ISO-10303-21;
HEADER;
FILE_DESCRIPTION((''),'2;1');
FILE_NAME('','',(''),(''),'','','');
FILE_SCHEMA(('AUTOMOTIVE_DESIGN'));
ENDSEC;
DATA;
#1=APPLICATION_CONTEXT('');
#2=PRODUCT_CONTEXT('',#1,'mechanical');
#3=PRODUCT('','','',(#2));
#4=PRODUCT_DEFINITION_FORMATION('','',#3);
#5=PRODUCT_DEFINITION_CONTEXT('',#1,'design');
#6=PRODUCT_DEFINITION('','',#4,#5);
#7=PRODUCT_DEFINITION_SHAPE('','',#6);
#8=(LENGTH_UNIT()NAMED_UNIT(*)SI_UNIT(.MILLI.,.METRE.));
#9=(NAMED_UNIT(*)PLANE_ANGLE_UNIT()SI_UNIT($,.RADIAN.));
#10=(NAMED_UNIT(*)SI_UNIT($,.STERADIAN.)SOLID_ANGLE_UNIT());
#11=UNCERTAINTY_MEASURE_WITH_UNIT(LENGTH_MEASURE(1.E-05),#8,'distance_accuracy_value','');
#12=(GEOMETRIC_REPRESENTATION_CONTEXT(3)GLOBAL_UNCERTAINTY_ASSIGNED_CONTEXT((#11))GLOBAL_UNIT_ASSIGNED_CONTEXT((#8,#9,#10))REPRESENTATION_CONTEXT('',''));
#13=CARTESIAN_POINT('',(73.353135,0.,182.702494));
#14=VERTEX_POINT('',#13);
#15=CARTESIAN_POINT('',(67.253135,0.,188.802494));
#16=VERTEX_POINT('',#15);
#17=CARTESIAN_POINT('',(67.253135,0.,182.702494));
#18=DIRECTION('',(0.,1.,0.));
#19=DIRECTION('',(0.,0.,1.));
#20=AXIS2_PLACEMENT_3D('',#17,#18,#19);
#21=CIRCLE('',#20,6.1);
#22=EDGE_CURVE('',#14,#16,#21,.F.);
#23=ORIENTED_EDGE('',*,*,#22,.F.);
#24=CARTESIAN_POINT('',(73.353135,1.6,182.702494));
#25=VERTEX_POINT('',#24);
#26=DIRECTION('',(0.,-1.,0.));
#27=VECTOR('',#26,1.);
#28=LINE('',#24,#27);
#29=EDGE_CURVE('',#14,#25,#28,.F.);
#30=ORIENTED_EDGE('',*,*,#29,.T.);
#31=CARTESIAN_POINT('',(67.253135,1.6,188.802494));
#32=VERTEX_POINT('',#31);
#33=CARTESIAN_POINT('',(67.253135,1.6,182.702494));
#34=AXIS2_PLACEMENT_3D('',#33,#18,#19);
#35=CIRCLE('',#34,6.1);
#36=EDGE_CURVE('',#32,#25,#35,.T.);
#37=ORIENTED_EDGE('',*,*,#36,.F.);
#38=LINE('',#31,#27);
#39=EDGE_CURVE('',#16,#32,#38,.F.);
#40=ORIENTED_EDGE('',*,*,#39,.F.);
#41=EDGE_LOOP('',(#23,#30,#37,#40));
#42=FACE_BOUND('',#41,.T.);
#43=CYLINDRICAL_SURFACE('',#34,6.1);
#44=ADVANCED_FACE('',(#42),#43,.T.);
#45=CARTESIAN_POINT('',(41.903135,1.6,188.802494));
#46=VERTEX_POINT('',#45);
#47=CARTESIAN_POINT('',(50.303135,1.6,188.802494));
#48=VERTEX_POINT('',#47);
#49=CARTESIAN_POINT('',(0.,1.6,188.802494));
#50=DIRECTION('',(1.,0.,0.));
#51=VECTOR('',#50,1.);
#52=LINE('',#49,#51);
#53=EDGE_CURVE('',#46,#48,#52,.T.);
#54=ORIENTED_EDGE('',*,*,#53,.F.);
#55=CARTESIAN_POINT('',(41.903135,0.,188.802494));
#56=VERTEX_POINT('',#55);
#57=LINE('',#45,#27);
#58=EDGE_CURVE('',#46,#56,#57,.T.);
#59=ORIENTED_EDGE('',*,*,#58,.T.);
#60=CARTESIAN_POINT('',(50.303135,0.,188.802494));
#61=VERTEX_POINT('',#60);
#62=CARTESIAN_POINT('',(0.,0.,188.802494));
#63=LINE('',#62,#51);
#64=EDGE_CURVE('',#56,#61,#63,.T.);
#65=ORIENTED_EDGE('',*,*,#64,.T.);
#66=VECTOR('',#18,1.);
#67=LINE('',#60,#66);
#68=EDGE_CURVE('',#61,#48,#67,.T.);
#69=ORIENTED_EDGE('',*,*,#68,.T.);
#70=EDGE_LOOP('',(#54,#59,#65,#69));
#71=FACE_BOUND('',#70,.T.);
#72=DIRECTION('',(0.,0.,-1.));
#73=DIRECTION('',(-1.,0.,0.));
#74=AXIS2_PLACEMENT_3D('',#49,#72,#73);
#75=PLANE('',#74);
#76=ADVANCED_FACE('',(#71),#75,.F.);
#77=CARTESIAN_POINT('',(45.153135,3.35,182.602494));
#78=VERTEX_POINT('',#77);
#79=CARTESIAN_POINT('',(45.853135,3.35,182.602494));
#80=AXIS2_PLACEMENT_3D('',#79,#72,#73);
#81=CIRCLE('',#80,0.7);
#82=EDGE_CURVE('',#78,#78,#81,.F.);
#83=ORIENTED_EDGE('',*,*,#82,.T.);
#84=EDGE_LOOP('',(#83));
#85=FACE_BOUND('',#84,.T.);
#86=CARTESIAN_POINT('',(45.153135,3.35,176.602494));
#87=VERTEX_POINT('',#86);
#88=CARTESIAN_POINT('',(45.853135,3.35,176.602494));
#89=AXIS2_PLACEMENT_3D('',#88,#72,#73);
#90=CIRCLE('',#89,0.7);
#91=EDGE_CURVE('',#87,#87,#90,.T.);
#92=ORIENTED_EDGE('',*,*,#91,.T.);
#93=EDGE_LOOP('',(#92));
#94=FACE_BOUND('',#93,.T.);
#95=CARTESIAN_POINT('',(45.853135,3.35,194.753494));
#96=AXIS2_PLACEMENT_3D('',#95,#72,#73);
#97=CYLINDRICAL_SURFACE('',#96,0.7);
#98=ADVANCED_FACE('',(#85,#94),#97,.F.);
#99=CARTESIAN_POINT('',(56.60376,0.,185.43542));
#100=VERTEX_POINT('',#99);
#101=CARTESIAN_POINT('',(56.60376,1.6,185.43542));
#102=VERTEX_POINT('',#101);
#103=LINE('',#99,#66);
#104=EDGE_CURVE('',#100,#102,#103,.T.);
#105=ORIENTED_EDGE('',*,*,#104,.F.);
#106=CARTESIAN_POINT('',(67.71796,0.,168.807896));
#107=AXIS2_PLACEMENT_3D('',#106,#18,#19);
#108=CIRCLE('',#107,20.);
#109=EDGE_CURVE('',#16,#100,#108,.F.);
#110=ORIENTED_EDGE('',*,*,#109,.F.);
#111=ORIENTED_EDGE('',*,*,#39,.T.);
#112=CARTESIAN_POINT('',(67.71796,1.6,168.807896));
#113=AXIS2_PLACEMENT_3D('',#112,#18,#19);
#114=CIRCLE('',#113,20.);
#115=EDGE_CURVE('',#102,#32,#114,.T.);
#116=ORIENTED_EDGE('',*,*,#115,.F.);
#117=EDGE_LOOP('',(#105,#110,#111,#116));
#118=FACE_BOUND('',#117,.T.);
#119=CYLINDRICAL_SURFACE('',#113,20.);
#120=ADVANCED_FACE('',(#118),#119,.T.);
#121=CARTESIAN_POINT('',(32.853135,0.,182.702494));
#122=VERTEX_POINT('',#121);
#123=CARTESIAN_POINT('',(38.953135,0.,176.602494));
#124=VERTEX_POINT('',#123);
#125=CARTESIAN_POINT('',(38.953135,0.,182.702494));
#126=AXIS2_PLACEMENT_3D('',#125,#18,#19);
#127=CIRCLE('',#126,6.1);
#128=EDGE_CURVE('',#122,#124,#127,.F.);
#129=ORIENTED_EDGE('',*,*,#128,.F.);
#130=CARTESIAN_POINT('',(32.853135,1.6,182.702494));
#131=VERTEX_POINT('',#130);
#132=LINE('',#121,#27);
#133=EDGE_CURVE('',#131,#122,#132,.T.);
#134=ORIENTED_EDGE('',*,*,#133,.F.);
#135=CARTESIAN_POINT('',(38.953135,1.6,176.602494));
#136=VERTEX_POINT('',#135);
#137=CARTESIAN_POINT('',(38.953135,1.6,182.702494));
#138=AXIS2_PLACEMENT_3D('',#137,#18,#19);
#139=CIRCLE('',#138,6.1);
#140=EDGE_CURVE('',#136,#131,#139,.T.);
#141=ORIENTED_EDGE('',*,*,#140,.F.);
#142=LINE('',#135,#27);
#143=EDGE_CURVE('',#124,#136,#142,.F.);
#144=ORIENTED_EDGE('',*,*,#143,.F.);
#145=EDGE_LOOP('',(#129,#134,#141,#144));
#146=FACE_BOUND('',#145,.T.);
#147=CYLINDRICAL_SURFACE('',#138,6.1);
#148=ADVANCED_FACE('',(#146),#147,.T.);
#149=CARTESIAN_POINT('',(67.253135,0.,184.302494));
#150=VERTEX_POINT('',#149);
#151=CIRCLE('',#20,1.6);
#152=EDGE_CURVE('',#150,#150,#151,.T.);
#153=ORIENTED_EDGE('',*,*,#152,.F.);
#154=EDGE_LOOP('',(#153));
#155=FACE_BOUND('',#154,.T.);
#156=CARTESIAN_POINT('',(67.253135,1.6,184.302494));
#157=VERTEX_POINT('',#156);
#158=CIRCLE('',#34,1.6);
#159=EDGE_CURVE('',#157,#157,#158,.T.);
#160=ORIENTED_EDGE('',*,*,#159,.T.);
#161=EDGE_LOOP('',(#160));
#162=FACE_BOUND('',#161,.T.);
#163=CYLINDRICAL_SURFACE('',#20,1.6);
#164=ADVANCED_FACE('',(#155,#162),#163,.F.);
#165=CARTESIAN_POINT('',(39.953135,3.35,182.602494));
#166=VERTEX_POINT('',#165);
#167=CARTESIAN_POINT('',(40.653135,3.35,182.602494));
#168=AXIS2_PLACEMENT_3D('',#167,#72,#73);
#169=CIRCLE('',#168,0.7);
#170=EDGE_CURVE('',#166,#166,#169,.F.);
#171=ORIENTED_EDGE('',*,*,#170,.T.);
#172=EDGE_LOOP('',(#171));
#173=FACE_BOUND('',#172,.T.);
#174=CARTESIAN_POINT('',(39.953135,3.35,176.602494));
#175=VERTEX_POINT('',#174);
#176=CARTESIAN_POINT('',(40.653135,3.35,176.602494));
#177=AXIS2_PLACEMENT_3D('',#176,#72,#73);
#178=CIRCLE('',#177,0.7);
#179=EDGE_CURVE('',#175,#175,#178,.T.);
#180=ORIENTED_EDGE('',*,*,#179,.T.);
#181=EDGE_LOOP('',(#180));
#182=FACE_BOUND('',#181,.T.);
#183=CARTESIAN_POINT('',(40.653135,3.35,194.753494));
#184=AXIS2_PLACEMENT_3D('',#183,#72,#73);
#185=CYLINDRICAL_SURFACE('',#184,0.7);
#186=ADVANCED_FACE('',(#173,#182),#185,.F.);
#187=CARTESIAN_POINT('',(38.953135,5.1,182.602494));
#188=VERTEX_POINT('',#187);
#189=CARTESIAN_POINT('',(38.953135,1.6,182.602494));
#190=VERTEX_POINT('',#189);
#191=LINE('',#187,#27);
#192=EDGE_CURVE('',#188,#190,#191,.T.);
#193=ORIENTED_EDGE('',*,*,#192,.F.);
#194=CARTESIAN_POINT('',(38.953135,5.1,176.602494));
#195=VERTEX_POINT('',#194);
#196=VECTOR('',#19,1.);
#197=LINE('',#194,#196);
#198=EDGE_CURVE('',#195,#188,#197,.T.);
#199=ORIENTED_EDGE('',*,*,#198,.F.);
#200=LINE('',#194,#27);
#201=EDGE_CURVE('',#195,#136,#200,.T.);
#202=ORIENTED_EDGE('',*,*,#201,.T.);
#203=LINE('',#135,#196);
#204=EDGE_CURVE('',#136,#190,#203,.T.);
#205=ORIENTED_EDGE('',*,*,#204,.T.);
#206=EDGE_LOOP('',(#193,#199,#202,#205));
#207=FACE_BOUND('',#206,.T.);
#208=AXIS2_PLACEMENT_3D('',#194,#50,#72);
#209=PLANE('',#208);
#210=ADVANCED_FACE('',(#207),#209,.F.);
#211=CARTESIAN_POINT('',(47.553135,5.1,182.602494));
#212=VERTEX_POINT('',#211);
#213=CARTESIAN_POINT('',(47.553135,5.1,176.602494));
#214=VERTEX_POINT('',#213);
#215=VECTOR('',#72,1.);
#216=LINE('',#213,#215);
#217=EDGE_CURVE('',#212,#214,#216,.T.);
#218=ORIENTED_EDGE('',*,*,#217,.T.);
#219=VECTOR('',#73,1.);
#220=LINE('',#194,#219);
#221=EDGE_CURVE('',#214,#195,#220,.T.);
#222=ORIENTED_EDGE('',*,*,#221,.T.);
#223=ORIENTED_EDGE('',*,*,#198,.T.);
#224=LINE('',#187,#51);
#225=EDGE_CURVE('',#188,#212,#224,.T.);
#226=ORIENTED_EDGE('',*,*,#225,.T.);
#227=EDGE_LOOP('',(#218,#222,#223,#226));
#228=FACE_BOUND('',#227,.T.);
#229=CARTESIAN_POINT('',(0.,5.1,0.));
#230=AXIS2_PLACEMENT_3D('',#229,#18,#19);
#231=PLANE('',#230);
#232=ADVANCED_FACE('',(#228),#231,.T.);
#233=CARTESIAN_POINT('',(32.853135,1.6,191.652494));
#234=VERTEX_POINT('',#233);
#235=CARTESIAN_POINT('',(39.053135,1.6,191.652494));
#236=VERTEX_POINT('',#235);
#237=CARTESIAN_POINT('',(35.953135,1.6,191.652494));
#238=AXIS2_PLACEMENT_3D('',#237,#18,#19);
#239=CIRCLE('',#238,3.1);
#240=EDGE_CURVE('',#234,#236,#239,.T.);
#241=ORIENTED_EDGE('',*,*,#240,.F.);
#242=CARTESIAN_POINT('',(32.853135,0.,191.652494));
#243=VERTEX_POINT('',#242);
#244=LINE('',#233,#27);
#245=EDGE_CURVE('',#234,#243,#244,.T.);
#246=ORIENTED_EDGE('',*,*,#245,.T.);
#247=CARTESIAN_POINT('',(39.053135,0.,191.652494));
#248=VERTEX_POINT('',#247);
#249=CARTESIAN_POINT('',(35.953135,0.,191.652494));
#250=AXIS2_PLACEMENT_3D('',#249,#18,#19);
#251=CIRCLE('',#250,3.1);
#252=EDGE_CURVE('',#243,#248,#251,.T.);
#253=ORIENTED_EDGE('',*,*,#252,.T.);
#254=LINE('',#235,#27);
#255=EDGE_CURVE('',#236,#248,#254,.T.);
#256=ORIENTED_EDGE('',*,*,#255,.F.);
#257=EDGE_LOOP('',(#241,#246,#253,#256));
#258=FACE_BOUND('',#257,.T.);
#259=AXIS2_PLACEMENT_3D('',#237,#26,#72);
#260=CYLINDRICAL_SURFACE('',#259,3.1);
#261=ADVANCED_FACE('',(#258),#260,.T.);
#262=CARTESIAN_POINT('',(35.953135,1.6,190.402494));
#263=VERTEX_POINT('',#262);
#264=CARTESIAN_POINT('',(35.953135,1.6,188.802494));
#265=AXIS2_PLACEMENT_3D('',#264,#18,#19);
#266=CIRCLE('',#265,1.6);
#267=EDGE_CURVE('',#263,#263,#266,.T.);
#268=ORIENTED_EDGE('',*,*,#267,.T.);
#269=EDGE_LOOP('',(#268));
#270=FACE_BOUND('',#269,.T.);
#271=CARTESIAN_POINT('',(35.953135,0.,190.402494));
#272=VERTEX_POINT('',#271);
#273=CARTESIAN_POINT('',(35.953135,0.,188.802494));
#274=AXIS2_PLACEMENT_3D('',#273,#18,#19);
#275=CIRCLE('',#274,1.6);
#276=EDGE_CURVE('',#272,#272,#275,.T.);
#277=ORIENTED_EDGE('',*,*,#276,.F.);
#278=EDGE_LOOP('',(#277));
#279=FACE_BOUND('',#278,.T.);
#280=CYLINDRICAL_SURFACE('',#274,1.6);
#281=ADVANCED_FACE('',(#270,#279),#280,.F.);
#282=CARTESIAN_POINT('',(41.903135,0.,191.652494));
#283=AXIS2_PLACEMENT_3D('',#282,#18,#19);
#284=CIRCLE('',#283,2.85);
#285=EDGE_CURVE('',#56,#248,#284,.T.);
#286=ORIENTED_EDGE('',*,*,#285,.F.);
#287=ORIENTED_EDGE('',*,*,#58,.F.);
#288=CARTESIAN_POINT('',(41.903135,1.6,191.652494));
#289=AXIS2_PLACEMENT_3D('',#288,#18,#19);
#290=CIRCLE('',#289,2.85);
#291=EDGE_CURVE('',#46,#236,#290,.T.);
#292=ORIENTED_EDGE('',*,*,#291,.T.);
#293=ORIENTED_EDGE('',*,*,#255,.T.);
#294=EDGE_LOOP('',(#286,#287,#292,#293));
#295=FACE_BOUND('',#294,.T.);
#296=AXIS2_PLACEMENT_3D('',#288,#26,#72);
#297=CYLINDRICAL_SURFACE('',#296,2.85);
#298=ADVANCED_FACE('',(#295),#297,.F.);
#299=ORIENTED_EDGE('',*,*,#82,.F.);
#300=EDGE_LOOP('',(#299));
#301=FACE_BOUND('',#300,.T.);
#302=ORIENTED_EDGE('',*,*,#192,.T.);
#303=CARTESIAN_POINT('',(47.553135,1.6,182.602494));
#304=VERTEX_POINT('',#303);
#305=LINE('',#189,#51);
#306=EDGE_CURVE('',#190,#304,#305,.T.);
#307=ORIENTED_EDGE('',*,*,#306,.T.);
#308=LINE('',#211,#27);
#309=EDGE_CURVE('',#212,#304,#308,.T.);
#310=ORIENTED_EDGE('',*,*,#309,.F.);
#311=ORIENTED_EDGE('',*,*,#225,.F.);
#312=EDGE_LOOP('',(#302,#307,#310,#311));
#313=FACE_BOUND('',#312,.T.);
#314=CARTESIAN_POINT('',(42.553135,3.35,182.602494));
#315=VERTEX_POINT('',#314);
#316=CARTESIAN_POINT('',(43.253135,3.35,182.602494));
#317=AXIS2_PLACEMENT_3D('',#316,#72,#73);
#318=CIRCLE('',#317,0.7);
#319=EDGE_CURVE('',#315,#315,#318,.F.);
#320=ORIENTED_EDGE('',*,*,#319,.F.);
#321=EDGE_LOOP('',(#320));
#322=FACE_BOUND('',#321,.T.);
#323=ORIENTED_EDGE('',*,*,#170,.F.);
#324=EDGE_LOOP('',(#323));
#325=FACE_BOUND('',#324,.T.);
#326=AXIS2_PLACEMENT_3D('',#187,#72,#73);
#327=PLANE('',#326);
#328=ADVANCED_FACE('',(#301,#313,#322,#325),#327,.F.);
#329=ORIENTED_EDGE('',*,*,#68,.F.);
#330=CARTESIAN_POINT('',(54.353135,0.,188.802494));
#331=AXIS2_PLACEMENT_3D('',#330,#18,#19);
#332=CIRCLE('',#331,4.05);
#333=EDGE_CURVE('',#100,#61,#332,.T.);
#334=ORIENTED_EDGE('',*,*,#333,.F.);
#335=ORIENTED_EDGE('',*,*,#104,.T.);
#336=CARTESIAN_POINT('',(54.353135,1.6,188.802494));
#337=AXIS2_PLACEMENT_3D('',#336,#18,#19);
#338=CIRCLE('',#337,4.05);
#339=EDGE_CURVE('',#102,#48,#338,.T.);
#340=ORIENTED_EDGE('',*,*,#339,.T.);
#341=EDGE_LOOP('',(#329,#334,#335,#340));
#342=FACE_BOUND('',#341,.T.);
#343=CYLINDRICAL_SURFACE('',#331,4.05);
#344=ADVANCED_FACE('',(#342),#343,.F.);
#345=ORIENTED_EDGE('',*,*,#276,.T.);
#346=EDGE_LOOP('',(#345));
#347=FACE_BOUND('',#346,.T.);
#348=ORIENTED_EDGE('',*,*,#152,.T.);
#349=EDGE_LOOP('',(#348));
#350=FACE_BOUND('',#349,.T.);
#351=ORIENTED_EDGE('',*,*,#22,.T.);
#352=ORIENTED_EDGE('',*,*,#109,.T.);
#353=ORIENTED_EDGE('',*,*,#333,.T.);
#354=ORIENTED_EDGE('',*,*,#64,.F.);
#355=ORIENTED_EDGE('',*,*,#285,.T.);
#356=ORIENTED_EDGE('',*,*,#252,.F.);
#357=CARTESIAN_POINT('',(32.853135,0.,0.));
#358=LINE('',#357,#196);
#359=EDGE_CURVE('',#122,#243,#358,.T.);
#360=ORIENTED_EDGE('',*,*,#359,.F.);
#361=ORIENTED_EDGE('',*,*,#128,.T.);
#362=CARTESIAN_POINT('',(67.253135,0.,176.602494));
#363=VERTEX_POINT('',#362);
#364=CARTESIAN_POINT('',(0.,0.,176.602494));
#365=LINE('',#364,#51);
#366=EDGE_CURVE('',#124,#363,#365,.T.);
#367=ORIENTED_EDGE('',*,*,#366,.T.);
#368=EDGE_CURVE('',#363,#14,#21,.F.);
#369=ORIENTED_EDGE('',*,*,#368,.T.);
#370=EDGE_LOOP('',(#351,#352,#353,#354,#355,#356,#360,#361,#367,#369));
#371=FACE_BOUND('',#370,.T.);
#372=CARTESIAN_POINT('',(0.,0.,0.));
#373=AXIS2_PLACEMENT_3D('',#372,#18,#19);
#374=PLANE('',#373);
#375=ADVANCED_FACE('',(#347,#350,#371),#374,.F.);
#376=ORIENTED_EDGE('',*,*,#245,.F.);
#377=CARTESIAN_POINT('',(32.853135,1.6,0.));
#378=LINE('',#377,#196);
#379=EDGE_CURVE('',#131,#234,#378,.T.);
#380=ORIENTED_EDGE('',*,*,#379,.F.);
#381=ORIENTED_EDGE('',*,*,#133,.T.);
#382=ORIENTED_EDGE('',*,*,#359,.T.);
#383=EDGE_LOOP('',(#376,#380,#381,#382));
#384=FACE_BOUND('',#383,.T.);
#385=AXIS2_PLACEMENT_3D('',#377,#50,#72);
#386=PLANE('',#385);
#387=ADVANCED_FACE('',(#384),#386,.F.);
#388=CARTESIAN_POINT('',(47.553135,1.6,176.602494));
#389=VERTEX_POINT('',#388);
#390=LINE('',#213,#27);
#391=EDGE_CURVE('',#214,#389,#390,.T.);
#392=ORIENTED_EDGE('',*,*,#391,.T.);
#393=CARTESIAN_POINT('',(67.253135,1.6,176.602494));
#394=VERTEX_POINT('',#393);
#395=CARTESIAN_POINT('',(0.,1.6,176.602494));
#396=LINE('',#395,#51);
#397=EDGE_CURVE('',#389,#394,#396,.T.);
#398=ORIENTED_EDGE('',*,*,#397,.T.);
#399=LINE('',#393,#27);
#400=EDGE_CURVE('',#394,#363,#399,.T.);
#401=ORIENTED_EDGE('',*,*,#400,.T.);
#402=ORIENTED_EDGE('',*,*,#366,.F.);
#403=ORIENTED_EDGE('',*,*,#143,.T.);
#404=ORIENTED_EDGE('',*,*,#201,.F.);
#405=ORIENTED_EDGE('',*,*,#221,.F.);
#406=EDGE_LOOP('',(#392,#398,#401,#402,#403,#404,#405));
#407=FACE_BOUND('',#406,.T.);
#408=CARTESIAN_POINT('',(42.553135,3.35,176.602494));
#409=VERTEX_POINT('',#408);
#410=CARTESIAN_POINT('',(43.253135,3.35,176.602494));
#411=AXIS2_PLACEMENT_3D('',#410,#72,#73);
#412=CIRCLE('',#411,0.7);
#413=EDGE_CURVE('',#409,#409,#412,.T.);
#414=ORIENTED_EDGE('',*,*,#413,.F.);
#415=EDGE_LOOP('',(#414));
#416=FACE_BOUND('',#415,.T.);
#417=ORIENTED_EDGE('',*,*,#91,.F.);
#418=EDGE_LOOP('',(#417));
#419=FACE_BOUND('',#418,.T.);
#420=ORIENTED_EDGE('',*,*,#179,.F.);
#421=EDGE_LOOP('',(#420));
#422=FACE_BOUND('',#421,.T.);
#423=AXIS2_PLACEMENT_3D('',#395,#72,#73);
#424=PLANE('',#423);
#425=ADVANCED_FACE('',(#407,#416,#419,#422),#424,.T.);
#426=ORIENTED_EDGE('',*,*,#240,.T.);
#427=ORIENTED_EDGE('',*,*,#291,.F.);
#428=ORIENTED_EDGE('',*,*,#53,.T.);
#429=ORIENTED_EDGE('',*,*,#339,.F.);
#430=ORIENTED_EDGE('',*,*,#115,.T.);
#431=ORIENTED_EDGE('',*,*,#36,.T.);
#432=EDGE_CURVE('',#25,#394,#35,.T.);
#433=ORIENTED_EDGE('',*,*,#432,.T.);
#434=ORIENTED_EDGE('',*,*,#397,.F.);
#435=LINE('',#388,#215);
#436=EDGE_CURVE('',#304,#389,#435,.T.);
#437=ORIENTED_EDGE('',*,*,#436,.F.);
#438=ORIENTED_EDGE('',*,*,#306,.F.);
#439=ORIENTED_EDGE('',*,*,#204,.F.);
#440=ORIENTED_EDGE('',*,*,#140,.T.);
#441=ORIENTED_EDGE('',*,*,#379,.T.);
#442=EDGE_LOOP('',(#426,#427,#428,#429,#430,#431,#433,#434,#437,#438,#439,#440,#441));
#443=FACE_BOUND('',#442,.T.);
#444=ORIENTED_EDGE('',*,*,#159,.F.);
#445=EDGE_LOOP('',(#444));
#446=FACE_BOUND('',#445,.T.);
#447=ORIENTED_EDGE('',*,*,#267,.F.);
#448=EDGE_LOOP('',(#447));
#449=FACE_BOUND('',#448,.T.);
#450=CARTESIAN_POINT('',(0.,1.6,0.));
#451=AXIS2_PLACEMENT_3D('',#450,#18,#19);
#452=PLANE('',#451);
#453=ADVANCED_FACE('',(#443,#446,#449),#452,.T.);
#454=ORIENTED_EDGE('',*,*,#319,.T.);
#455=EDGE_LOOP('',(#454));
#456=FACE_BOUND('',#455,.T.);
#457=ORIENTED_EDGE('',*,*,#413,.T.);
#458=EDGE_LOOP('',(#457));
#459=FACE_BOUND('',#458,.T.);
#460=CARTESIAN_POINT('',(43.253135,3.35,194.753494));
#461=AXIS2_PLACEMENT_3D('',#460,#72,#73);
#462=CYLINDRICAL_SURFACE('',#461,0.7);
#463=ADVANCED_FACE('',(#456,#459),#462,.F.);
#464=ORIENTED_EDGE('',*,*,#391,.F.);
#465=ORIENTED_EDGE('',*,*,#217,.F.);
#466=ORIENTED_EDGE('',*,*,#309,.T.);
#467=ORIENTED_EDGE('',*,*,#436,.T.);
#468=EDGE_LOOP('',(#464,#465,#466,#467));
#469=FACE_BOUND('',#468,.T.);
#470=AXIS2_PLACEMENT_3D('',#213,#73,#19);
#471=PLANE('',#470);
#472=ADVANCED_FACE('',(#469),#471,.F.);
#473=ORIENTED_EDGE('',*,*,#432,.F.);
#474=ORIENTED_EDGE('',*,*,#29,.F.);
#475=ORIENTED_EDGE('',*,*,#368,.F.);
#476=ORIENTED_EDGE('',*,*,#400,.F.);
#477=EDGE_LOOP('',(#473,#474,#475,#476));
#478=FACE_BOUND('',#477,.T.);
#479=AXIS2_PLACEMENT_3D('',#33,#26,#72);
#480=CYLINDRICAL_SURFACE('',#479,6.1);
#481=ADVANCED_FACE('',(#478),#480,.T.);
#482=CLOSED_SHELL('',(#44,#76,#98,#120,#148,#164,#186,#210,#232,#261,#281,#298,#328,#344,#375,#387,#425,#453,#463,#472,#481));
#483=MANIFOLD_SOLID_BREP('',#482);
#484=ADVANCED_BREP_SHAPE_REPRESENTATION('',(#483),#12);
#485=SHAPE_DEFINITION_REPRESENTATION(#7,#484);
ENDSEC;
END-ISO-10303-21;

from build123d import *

# Parameters (mm, degrees)
BOSS_EXTRUDE1_DEPTH = 1.6
SKETCH4_R           = 1.6
CUT_EXTRUDE2_DEPTH  = 209.114814948
FILLET2_R           = 6.1
SKETCH2_W           = 8.6
SKETCH2_H           = 6
BOSS_EXTRUDE2_DEPTH = 3.5
CUT_EXTRUDE1_REACH  = 77.737
SKETCH3_R           = 0.7
FILLET1_R           = 20


# Some blends are built 0.0001 mm under size
with BuildPart() as part:
    # Sketch1 → Boss-Extrude1 (new body)
    with BuildSketch(Plane(origin=(0, 0, 0), x_dir=(1, 0, 0), z_dir=(0, 1, 0))):
        with BuildLine():
            Line((32.853134702, -176.602493772), (73.353134702, -176.602493772))
            Line((73.353134702, -176.602493772), (73.353134702, -188.802493772))
            Line((73.353134702, -188.802493772), (41.903134702, -188.802493772))
            ThreePointArc((41.903134702, -188.802493772), (39.887880375, -189.637239445), (39.053134702, -191.652493772))
            ThreePointArc((39.053134702, -191.652493772), (35.953134702, -194.752493772), (32.853134702, -191.652493772))
            Line((32.853134702, -191.652493772), (32.853134702, -176.602493772))
        make_face()
    extrude(amount=BOSS_EXTRUDE1_DEPTH)

    # Sketch4 → Cut-Extrude2 (cut, through all)
    with BuildSketch(Plane(origin=(0, 1.6, 0), x_dir=(1, 0, 0), z_dir=(0, 1, 0))):
        with Locations(Location((67.253134702, -182.702493772, 0), (0, 0, 270))):
            Circle(SKETCH4_R)
        with Locations(Location((35.953134702, -188.802493772, 0), (0, 0, 270))):
            Circle(SKETCH4_R)
        with BuildLine():
            Line((50.303134702, -188.802493772), (58.403134702, -188.802493772))
            ThreePointArc((58.403134702, -188.802493772), (54.353134702, -184.752493772), (50.303134702, -188.802493772))
        make_face()
    extrude(amount=-CUT_EXTRUDE2_DEPTH, mode=Mode.SUBTRACT)

    # Fillet2
    fillet2_edges = [part.edges().sort_by_distance(p)[0] for p in [
        (73.353134702, 0.8, 176.602493772),
        (73.353134702, 0.8, 188.802493772),
        (32.853134702, 0.8, 176.602493772),
    ]]
    fillet(fillet2_edges, radius=FILLET2_R - 0.0001)  # a hair under: the kernel refuses the full size

    # Sketch2 → Boss-Extrude2 (add)
    with BuildSketch(Plane(origin=(0, 1.6, 0), x_dir=(1, 0, 0), z_dir=(0, 1, 0))):
        with Locations((43.253134702, -179.602493772)):
            Rectangle(SKETCH2_W, SKETCH2_H)
    extrude(amount=BOSS_EXTRUDE2_DEPTH)

    # Sketch3 → Cut-Extrude1 (cut, up to next)
    with BuildSketch(Plane(origin=(0, 0, 176.602493772), x_dir=(-1, 0, 0), z_dir=(0, 0, -1)), mode=Mode.PRIVATE) as cut_extrude1_sk1:
        with Locations((-45.853134702, 3.35)):
            Circle(SKETCH3_R)
    cut_extrude1_tool1 = extrude(cut_extrude1_sk1.sketch, amount=-CUT_EXTRUDE1_REACH, mode=Mode.PRIVATE) & part.part
    # Sketch3 → Cut-Extrude1 (cut, up to next)
    with BuildSketch(Plane(origin=(0, 0, 176.602493772), x_dir=(-1, 0, 0), z_dir=(0, 0, -1)), mode=Mode.PRIVATE) as cut_extrude1_sk2:
        with Locations((-40.653134702, 3.35)):
            Circle(SKETCH3_R)
    cut_extrude1_tool2 = extrude(cut_extrude1_sk2.sketch, amount=-CUT_EXTRUDE1_REACH, mode=Mode.PRIVATE) & part.part
    # Sketch3 → Cut-Extrude1 (cut, up to next)
    with BuildSketch(Plane(origin=(0, 0, 176.602493772), x_dir=(-1, 0, 0), z_dir=(0, 0, -1)), mode=Mode.PRIVATE) as cut_extrude1_sk3:
        with Locations((-43.253134702, 3.35)):
            Circle(SKETCH3_R)
    cut_extrude1_tool3 = extrude(cut_extrude1_sk3.sketch, amount=-CUT_EXTRUDE1_REACH, mode=Mode.PRIVATE) & part.part
    add(cut_extrude1_tool1.solids().sort_by_distance((45.853135, 3.35, 176.602494))[0], mode=Mode.SUBTRACT)
    add(cut_extrude1_tool2.solids().sort_by_distance((40.653135, 3.35, 176.602494))[0], mode=Mode.SUBTRACT)
    add(cut_extrude1_tool3.solids().sort_by_distance((43.253135, 3.35, 176.602494))[0], mode=Mode.SUBTRACT)

    # Fillet1
    # the kernel refuses this fillet: 20 mm, written as the material it takes off along each edge
    with BuildSketch(Plane(origin=(58.403134702, 23.72525, 188.802493772), x_dir=(-0.4713226848050216, 0, -0.8819608419811995), z_dir=(0, -1, 0))) as fillet1_piece_1:
        with BuildLine():
            CenterArc((13.244167443, 17.63921684), FILLET1_R, 209.451639401, 32.428171428)
            Line((-4.171252893, 7.805441648), (-4.5195613, 7.608766144))
            ThreePointArc((-4.5195613, 7.608766144), (-2.438410783, 3.71419175), (-0.352784337, -0.188529074))
            Line((-0.352784337, -0.188529074), (0.188529074, -0.352784337))
            ThreePointArc((0.188529074, -0.352784337), (1.908856873, 0.07805859), (3.629184673, -0.352784337))
            Line((3.629184673, -0.352784337), (3.817713747, 0))
        make_face()
    extrude(amount=45.8505, mode=Mode.SUBTRACT)


solid = part.part
